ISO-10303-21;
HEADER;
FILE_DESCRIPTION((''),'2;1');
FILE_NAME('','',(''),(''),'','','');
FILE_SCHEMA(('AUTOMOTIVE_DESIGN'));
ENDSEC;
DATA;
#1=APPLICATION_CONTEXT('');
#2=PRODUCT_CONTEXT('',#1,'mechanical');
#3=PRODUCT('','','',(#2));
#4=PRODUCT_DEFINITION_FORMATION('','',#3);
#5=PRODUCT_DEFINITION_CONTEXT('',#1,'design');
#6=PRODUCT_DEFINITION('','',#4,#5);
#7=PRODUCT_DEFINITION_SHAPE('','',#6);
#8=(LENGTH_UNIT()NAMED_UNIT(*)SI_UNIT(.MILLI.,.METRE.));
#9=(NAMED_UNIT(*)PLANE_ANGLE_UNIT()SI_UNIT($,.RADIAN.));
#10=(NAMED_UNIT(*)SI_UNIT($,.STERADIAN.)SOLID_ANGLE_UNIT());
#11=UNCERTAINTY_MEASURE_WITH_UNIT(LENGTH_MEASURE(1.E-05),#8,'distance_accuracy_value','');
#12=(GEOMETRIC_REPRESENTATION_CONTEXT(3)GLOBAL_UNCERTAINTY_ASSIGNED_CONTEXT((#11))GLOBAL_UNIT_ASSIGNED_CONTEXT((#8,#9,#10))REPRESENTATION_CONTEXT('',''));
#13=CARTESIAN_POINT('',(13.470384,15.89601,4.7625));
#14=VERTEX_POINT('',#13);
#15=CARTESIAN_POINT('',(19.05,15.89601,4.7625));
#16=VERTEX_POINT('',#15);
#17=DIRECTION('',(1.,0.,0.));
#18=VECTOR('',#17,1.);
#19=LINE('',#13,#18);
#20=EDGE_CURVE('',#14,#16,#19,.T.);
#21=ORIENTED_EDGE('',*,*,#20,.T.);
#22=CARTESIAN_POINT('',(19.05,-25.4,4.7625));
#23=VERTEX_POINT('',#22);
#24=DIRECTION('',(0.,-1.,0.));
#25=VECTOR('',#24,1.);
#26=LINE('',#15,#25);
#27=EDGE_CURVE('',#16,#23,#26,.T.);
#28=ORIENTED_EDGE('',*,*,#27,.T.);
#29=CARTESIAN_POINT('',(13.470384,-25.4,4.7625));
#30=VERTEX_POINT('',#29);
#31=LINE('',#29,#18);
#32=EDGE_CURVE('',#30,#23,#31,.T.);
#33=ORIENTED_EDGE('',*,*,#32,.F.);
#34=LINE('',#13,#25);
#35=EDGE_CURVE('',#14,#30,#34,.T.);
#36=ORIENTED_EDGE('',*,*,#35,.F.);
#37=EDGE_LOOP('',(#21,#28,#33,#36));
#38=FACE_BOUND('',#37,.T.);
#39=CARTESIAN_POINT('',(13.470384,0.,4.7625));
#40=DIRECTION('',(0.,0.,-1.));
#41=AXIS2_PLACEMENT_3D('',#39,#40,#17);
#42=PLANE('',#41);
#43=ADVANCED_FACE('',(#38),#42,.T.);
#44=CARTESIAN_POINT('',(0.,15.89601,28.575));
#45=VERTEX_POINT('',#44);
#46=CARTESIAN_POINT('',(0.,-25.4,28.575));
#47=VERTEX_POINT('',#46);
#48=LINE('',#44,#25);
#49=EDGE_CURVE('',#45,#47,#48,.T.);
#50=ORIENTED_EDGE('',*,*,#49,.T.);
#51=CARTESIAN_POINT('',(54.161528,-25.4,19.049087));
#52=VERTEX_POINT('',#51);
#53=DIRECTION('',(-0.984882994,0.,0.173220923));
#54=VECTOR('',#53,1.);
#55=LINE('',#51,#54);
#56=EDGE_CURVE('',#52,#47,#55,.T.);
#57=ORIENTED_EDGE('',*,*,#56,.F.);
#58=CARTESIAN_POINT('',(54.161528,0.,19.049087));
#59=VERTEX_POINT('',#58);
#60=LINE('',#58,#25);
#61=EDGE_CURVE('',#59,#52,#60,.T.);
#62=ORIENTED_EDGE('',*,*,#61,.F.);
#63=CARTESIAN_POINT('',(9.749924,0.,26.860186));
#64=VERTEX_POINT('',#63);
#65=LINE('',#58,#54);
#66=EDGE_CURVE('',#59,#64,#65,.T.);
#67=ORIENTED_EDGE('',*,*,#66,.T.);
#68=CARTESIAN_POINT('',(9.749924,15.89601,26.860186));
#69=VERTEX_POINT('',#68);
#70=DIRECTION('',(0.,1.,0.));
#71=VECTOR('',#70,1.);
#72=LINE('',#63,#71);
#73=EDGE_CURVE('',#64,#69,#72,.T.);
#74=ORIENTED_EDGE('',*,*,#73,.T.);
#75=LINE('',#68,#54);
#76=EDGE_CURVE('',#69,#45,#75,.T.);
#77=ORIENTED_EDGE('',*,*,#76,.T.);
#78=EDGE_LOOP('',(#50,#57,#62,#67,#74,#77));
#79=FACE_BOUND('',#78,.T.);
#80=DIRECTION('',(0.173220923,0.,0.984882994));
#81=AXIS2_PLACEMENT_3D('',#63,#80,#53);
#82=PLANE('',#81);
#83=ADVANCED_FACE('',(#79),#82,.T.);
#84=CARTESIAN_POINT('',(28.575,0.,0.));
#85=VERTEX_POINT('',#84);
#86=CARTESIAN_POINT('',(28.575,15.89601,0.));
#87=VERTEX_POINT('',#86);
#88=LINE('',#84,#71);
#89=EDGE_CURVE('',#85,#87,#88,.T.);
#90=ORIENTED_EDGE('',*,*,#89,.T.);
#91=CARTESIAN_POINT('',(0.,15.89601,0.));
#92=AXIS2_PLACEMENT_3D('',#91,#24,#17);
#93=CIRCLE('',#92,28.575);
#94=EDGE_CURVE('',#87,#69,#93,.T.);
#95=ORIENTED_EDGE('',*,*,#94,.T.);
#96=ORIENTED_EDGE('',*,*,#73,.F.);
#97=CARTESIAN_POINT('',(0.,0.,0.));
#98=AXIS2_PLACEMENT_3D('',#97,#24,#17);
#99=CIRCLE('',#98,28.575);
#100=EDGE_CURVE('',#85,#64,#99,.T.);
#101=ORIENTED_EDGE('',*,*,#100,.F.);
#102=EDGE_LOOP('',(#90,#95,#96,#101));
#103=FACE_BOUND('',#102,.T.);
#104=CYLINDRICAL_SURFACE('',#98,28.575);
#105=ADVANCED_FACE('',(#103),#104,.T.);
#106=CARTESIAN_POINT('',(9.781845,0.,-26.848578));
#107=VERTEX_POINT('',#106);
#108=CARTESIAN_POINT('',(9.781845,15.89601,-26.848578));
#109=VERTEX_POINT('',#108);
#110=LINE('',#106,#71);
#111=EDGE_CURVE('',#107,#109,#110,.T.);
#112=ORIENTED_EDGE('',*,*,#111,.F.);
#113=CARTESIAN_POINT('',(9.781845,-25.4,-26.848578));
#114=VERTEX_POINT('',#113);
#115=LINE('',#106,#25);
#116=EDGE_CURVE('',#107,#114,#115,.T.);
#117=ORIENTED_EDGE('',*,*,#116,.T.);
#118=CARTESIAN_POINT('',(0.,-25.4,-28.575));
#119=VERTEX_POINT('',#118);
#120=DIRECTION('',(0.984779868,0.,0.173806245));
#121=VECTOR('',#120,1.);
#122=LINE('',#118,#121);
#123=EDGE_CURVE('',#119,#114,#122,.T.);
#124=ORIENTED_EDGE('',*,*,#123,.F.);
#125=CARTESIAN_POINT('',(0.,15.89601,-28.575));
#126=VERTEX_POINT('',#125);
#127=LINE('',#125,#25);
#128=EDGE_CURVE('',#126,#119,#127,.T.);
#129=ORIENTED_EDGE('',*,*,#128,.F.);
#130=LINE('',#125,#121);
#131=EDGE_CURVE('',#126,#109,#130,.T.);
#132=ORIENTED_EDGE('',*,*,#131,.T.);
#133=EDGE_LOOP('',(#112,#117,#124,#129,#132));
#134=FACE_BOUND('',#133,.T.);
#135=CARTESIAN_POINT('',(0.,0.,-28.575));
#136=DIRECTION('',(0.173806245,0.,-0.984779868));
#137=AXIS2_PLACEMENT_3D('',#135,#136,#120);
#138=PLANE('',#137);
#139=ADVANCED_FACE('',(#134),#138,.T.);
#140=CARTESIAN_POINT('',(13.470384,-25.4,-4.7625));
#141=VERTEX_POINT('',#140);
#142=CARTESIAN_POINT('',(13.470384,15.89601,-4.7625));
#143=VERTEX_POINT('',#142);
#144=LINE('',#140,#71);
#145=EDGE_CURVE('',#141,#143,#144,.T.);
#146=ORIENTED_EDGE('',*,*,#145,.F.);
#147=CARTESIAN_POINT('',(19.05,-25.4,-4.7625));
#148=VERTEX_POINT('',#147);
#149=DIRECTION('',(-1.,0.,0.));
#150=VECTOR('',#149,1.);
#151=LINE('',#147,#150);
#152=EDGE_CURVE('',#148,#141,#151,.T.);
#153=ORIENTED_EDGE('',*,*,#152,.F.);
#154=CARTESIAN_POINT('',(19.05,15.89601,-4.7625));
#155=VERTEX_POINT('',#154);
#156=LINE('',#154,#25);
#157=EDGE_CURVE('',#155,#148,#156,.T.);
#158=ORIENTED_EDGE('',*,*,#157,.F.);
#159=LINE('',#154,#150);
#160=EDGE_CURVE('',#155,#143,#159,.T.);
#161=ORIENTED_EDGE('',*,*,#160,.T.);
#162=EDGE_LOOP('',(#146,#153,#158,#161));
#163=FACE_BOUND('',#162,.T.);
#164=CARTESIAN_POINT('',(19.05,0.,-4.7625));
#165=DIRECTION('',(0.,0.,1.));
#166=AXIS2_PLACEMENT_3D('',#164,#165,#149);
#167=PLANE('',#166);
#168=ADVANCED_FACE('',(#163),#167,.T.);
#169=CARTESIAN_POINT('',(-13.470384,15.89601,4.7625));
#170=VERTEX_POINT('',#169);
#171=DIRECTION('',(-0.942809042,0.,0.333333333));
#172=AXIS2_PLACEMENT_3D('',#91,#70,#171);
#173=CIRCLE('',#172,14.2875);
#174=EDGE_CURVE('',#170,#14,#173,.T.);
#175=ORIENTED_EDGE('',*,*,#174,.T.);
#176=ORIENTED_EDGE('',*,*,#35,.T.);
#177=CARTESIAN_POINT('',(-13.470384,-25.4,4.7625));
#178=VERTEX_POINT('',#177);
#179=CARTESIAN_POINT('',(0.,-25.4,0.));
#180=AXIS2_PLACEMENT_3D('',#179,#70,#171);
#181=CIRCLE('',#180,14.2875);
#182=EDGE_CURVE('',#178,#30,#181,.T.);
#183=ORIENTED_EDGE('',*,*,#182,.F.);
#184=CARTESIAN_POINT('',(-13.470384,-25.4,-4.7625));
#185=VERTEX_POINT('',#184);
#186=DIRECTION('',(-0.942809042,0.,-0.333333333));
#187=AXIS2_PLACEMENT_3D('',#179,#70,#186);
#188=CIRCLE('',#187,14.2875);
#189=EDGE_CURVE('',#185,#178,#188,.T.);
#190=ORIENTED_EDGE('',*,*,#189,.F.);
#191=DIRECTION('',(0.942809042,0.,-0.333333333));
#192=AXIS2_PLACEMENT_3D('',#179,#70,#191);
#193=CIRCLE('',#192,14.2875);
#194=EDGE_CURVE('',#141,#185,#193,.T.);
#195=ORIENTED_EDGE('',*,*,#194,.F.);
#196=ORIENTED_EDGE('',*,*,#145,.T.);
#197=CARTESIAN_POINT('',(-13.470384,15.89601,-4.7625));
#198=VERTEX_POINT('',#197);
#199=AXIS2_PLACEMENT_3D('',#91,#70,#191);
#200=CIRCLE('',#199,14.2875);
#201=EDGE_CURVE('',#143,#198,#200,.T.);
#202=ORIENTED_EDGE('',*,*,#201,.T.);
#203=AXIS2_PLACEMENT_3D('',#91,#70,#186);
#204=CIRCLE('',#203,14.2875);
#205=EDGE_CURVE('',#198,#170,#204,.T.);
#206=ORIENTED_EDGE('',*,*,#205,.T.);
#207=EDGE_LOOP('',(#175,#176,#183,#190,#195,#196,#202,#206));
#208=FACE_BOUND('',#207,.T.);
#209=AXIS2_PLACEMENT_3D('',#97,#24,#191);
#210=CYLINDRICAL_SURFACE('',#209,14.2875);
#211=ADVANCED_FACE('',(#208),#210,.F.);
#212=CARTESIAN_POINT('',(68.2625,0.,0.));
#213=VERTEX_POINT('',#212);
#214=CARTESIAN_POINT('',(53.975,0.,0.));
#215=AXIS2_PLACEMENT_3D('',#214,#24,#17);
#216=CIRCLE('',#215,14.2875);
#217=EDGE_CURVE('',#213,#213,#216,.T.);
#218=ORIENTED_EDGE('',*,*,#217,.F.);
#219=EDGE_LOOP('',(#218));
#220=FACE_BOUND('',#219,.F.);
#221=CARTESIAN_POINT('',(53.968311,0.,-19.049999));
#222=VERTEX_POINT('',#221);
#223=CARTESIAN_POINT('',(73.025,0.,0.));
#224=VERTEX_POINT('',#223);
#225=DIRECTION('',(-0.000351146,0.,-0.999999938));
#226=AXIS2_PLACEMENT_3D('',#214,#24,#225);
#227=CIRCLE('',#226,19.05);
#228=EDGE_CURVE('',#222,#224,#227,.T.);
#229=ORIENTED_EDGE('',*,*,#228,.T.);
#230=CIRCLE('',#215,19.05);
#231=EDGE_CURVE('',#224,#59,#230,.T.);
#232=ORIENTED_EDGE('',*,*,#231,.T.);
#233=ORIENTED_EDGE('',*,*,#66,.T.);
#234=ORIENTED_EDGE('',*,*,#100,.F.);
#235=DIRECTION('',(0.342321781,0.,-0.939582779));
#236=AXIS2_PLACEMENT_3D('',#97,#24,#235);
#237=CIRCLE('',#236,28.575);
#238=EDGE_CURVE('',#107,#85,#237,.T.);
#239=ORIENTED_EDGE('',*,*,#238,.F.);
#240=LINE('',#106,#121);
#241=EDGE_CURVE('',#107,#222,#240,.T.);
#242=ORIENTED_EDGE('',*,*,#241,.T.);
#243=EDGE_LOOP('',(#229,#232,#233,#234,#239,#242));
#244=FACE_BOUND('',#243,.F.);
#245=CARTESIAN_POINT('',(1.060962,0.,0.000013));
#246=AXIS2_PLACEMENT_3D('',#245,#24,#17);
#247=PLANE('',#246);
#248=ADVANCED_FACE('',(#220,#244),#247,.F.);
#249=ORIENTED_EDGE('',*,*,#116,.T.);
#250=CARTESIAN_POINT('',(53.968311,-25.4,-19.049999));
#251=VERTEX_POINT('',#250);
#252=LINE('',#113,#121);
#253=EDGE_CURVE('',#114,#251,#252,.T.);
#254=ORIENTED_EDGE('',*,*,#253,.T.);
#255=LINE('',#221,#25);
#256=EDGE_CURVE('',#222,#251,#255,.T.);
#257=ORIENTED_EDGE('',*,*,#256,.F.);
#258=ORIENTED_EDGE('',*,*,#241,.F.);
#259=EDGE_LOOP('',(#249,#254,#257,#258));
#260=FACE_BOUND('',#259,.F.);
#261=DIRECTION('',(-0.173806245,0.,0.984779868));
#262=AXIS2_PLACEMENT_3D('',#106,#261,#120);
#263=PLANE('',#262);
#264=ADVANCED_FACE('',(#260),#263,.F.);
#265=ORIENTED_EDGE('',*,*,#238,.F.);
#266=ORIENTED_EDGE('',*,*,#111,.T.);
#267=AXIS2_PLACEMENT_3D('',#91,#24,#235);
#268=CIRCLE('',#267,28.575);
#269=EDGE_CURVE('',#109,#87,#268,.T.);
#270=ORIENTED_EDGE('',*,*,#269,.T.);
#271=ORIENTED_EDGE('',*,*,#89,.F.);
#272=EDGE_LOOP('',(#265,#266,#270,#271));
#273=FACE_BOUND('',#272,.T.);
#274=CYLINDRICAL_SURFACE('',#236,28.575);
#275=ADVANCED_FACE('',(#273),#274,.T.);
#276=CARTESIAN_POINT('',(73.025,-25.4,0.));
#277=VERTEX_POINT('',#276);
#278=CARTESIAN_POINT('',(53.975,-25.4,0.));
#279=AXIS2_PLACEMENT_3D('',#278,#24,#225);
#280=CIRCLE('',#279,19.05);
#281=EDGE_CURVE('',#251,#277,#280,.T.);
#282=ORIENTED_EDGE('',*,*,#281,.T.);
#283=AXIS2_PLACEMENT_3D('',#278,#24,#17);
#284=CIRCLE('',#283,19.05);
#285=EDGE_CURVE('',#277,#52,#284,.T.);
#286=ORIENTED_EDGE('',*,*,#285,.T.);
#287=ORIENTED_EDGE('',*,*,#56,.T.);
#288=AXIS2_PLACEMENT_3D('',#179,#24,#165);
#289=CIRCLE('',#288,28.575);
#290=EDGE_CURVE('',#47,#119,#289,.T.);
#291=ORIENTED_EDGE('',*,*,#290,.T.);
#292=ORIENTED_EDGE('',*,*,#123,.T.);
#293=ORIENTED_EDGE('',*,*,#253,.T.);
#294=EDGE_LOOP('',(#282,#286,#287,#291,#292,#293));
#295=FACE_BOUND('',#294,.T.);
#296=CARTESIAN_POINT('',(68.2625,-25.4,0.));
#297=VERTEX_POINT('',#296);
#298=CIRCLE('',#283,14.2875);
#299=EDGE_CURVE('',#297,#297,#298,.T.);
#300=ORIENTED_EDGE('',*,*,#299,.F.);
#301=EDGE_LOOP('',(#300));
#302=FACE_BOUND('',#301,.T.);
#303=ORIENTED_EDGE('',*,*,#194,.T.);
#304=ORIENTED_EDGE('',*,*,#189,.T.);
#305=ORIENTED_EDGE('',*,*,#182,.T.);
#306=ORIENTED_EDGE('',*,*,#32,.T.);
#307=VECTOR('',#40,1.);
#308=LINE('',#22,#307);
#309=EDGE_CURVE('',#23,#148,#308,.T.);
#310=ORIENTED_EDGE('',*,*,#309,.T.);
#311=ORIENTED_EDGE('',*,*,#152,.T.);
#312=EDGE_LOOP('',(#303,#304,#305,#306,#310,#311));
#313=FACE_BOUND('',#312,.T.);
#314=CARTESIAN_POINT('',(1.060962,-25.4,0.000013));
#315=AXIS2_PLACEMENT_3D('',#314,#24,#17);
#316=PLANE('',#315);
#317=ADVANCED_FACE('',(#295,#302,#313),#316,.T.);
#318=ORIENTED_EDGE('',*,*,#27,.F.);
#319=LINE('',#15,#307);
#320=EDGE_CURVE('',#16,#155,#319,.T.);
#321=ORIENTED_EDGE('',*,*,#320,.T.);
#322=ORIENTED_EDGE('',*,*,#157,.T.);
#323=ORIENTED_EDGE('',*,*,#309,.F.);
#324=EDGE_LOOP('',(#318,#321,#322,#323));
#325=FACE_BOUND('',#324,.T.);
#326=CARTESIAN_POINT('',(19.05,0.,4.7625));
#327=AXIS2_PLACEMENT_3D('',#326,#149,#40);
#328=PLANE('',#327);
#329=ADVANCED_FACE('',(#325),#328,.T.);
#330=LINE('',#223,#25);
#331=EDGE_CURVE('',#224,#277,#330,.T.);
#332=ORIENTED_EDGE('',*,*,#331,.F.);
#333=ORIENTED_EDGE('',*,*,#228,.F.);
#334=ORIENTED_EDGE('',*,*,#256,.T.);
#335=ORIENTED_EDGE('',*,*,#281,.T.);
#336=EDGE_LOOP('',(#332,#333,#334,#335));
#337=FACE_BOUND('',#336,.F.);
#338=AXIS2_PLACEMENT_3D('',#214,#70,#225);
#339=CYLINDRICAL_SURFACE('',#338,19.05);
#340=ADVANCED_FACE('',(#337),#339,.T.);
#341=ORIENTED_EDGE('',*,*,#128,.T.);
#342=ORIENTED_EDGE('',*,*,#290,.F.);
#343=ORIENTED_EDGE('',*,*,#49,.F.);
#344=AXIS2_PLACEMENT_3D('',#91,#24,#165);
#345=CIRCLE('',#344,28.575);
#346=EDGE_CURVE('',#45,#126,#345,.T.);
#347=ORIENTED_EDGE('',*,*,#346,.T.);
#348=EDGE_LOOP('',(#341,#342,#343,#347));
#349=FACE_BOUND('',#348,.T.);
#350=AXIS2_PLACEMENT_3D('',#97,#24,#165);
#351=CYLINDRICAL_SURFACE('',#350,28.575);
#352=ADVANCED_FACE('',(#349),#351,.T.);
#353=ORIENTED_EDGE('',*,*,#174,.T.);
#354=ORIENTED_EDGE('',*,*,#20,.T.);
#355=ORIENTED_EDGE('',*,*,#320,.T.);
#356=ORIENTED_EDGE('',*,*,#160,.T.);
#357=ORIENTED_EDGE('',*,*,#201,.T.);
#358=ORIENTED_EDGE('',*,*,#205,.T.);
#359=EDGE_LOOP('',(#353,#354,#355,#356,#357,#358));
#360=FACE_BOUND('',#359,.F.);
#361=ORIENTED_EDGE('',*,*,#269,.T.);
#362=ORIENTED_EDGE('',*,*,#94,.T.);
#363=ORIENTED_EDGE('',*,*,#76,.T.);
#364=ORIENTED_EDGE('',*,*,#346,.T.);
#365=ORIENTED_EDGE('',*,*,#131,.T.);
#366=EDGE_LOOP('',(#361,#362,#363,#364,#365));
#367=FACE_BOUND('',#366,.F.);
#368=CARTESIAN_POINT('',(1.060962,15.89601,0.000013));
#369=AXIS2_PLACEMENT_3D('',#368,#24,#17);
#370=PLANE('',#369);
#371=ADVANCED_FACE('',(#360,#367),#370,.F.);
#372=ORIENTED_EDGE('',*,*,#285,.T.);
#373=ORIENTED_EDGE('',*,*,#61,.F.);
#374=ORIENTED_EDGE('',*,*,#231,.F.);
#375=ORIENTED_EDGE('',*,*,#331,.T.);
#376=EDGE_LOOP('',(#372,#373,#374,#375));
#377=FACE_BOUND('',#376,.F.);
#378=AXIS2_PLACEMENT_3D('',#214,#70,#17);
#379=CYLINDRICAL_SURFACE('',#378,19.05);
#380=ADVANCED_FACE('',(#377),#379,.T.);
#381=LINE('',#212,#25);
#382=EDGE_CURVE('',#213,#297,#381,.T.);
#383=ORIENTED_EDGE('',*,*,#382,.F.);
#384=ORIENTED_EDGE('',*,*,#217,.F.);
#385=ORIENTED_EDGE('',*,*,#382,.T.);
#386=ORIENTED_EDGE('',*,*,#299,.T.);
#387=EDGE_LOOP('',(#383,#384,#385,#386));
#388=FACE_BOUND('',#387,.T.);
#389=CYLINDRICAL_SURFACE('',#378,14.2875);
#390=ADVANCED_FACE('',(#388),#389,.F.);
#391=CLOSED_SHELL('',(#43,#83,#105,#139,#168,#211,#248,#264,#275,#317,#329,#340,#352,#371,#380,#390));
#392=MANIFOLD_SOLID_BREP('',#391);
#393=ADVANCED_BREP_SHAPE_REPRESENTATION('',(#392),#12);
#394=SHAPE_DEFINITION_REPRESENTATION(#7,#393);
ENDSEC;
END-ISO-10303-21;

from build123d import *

# Parameters (mm, degrees)
F0_R     = 14.2875
F1_DEPTH = 25.4
F2_DEPTH = 15.89601


with BuildPart() as f1:
    # F0 (on Front) → F1 (new body)
    with BuildSketch(Plane.XZ):
        with BuildLine():
            Line((9.7499238233, 26.8601863441), (0, 28.575))
            ThreePointArc((0, 28.575), (-28.575, 0), (0, -28.575))
            Line((0, -28.575), (9.7818449028, -26.8485779008))
            ThreePointArc((9.7818449028, -26.8485779008), (23.4099000756, -16.3861894122), (28.575, 0))
            ThreePointArc((28.575, 0), (23.4001570321, 16.4000998739), (9.7499238233, 26.8601863441))
        make_face()
        with BuildLine():
            ThreePointArc((-13.4703841816, 4.7625), (0, 14.2875), (13.4703841816, 4.7625))
            Line((13.4703841816, 4.7625), (19.05, 4.7625))
            Line((19.05, 4.7625), (19.05, -4.7625))
            Line((19.05, -4.7625), (13.4703841816, -4.7625))
            ThreePointArc((13.4703841816, -4.7625), (0, -14.2875), (-13.4703841816, -4.7625))
            Line((-13.4703841816, -4.7625), (-19.05, -4.7625))
            Line((-19.05, -4.7625), (-19.05, 4.7625))
            Line((-19.05, 4.7625), (-13.4703841816, 4.7625))
        make_face(mode=Mode.SUBTRACT)
        with BuildLine():
            Line((54.1615282252, 19.0490867818), (9.7499238233, 26.8601863441))
            ThreePointArc((9.7499238233, 26.8601863441), (23.4001570321, 16.4000998739), (28.575, 0))
            ThreePointArc((28.575, 0), (23.4099000756, -16.3861894122), (9.7818449028, -26.8485779008))
            Line((9.7818449028, -26.8485779008), (53.9683106658, -19.0499988255))
            ThreePointArc((53.9683106658, -19.0499988255), (34.9252449744, 0.096609856), (54.1615282252, 19.0490867818))
        make_face()
        with BuildLine():
            ThreePointArc((73.025, 0), (67.5111712218, 13.4042742681), (54.1615282252, 19.0490867818))
            ThreePointArc((54.1615282252, 19.0490867818), (34.9252449744, 0.096609856), (53.9683106658, -19.0499988255))
            ThreePointArc((53.9683106658, -19.0499988255), (67.4430189372, -13.4727490108), (73.025, 0))
        make_face()
        with Locations((53.975, 0)):
            Circle(F0_R, mode=Mode.SUBTRACT)
        with BuildLine():
            ThreePointArc((-13.4703841816, -4.7625), (-14.2875, 0), (-13.4703841816, 4.7625))
            Line((-13.4703841816, 4.7625), (-19.05, 4.7625))
            Line((-19.05, 4.7625), (-19.05, -4.7625))
            Line((-19.05, -4.7625), (-13.4703841816, -4.7625))
        make_face()
    extrude(amount=F1_DEPTH)

    # F0 (on Front) → F2 (join)
    with BuildSketch(Plane.XZ):
        with BuildLine():
            Line((9.7499238233, 26.8601863441), (0, 28.575))
            ThreePointArc((0, 28.575), (-28.575, 0), (0, -28.575))
            Line((0, -28.575), (9.7818449028, -26.8485779008))
            ThreePointArc((9.7818449028, -26.8485779008), (23.4099000756, -16.3861894122), (28.575, 0))
            ThreePointArc((28.575, 0), (23.4001570321, 16.4000998739), (9.7499238233, 26.8601863441))
        make_face()
        with BuildLine():
            ThreePointArc((-13.4703841816, 4.7625), (0, 14.2875), (13.4703841816, 4.7625))
            Line((13.4703841816, 4.7625), (19.05, 4.7625))
            Line((19.05, 4.7625), (19.05, -4.7625))
            Line((19.05, -4.7625), (13.4703841816, -4.7625))
            ThreePointArc((13.4703841816, -4.7625), (0, -14.2875), (-13.4703841816, -4.7625))
            Line((-13.4703841816, -4.7625), (-19.05, -4.7625))
            Line((-19.05, -4.7625), (-19.05, 4.7625))
            Line((-19.05, 4.7625), (-13.4703841816, 4.7625))
        make_face(mode=Mode.SUBTRACT)
        with BuildLine():
            ThreePointArc((-13.4703841816, -4.7625), (-14.2875, 0), (-13.4703841816, 4.7625))
            Line((-13.4703841816, 4.7625), (-19.05, 4.7625))
            Line((-19.05, 4.7625), (-19.05, -4.7625))
            Line((-19.05, -4.7625), (-13.4703841816, -4.7625))
        make_face()
    extrude(amount=-F2_DEPTH)


solid = f1.part
